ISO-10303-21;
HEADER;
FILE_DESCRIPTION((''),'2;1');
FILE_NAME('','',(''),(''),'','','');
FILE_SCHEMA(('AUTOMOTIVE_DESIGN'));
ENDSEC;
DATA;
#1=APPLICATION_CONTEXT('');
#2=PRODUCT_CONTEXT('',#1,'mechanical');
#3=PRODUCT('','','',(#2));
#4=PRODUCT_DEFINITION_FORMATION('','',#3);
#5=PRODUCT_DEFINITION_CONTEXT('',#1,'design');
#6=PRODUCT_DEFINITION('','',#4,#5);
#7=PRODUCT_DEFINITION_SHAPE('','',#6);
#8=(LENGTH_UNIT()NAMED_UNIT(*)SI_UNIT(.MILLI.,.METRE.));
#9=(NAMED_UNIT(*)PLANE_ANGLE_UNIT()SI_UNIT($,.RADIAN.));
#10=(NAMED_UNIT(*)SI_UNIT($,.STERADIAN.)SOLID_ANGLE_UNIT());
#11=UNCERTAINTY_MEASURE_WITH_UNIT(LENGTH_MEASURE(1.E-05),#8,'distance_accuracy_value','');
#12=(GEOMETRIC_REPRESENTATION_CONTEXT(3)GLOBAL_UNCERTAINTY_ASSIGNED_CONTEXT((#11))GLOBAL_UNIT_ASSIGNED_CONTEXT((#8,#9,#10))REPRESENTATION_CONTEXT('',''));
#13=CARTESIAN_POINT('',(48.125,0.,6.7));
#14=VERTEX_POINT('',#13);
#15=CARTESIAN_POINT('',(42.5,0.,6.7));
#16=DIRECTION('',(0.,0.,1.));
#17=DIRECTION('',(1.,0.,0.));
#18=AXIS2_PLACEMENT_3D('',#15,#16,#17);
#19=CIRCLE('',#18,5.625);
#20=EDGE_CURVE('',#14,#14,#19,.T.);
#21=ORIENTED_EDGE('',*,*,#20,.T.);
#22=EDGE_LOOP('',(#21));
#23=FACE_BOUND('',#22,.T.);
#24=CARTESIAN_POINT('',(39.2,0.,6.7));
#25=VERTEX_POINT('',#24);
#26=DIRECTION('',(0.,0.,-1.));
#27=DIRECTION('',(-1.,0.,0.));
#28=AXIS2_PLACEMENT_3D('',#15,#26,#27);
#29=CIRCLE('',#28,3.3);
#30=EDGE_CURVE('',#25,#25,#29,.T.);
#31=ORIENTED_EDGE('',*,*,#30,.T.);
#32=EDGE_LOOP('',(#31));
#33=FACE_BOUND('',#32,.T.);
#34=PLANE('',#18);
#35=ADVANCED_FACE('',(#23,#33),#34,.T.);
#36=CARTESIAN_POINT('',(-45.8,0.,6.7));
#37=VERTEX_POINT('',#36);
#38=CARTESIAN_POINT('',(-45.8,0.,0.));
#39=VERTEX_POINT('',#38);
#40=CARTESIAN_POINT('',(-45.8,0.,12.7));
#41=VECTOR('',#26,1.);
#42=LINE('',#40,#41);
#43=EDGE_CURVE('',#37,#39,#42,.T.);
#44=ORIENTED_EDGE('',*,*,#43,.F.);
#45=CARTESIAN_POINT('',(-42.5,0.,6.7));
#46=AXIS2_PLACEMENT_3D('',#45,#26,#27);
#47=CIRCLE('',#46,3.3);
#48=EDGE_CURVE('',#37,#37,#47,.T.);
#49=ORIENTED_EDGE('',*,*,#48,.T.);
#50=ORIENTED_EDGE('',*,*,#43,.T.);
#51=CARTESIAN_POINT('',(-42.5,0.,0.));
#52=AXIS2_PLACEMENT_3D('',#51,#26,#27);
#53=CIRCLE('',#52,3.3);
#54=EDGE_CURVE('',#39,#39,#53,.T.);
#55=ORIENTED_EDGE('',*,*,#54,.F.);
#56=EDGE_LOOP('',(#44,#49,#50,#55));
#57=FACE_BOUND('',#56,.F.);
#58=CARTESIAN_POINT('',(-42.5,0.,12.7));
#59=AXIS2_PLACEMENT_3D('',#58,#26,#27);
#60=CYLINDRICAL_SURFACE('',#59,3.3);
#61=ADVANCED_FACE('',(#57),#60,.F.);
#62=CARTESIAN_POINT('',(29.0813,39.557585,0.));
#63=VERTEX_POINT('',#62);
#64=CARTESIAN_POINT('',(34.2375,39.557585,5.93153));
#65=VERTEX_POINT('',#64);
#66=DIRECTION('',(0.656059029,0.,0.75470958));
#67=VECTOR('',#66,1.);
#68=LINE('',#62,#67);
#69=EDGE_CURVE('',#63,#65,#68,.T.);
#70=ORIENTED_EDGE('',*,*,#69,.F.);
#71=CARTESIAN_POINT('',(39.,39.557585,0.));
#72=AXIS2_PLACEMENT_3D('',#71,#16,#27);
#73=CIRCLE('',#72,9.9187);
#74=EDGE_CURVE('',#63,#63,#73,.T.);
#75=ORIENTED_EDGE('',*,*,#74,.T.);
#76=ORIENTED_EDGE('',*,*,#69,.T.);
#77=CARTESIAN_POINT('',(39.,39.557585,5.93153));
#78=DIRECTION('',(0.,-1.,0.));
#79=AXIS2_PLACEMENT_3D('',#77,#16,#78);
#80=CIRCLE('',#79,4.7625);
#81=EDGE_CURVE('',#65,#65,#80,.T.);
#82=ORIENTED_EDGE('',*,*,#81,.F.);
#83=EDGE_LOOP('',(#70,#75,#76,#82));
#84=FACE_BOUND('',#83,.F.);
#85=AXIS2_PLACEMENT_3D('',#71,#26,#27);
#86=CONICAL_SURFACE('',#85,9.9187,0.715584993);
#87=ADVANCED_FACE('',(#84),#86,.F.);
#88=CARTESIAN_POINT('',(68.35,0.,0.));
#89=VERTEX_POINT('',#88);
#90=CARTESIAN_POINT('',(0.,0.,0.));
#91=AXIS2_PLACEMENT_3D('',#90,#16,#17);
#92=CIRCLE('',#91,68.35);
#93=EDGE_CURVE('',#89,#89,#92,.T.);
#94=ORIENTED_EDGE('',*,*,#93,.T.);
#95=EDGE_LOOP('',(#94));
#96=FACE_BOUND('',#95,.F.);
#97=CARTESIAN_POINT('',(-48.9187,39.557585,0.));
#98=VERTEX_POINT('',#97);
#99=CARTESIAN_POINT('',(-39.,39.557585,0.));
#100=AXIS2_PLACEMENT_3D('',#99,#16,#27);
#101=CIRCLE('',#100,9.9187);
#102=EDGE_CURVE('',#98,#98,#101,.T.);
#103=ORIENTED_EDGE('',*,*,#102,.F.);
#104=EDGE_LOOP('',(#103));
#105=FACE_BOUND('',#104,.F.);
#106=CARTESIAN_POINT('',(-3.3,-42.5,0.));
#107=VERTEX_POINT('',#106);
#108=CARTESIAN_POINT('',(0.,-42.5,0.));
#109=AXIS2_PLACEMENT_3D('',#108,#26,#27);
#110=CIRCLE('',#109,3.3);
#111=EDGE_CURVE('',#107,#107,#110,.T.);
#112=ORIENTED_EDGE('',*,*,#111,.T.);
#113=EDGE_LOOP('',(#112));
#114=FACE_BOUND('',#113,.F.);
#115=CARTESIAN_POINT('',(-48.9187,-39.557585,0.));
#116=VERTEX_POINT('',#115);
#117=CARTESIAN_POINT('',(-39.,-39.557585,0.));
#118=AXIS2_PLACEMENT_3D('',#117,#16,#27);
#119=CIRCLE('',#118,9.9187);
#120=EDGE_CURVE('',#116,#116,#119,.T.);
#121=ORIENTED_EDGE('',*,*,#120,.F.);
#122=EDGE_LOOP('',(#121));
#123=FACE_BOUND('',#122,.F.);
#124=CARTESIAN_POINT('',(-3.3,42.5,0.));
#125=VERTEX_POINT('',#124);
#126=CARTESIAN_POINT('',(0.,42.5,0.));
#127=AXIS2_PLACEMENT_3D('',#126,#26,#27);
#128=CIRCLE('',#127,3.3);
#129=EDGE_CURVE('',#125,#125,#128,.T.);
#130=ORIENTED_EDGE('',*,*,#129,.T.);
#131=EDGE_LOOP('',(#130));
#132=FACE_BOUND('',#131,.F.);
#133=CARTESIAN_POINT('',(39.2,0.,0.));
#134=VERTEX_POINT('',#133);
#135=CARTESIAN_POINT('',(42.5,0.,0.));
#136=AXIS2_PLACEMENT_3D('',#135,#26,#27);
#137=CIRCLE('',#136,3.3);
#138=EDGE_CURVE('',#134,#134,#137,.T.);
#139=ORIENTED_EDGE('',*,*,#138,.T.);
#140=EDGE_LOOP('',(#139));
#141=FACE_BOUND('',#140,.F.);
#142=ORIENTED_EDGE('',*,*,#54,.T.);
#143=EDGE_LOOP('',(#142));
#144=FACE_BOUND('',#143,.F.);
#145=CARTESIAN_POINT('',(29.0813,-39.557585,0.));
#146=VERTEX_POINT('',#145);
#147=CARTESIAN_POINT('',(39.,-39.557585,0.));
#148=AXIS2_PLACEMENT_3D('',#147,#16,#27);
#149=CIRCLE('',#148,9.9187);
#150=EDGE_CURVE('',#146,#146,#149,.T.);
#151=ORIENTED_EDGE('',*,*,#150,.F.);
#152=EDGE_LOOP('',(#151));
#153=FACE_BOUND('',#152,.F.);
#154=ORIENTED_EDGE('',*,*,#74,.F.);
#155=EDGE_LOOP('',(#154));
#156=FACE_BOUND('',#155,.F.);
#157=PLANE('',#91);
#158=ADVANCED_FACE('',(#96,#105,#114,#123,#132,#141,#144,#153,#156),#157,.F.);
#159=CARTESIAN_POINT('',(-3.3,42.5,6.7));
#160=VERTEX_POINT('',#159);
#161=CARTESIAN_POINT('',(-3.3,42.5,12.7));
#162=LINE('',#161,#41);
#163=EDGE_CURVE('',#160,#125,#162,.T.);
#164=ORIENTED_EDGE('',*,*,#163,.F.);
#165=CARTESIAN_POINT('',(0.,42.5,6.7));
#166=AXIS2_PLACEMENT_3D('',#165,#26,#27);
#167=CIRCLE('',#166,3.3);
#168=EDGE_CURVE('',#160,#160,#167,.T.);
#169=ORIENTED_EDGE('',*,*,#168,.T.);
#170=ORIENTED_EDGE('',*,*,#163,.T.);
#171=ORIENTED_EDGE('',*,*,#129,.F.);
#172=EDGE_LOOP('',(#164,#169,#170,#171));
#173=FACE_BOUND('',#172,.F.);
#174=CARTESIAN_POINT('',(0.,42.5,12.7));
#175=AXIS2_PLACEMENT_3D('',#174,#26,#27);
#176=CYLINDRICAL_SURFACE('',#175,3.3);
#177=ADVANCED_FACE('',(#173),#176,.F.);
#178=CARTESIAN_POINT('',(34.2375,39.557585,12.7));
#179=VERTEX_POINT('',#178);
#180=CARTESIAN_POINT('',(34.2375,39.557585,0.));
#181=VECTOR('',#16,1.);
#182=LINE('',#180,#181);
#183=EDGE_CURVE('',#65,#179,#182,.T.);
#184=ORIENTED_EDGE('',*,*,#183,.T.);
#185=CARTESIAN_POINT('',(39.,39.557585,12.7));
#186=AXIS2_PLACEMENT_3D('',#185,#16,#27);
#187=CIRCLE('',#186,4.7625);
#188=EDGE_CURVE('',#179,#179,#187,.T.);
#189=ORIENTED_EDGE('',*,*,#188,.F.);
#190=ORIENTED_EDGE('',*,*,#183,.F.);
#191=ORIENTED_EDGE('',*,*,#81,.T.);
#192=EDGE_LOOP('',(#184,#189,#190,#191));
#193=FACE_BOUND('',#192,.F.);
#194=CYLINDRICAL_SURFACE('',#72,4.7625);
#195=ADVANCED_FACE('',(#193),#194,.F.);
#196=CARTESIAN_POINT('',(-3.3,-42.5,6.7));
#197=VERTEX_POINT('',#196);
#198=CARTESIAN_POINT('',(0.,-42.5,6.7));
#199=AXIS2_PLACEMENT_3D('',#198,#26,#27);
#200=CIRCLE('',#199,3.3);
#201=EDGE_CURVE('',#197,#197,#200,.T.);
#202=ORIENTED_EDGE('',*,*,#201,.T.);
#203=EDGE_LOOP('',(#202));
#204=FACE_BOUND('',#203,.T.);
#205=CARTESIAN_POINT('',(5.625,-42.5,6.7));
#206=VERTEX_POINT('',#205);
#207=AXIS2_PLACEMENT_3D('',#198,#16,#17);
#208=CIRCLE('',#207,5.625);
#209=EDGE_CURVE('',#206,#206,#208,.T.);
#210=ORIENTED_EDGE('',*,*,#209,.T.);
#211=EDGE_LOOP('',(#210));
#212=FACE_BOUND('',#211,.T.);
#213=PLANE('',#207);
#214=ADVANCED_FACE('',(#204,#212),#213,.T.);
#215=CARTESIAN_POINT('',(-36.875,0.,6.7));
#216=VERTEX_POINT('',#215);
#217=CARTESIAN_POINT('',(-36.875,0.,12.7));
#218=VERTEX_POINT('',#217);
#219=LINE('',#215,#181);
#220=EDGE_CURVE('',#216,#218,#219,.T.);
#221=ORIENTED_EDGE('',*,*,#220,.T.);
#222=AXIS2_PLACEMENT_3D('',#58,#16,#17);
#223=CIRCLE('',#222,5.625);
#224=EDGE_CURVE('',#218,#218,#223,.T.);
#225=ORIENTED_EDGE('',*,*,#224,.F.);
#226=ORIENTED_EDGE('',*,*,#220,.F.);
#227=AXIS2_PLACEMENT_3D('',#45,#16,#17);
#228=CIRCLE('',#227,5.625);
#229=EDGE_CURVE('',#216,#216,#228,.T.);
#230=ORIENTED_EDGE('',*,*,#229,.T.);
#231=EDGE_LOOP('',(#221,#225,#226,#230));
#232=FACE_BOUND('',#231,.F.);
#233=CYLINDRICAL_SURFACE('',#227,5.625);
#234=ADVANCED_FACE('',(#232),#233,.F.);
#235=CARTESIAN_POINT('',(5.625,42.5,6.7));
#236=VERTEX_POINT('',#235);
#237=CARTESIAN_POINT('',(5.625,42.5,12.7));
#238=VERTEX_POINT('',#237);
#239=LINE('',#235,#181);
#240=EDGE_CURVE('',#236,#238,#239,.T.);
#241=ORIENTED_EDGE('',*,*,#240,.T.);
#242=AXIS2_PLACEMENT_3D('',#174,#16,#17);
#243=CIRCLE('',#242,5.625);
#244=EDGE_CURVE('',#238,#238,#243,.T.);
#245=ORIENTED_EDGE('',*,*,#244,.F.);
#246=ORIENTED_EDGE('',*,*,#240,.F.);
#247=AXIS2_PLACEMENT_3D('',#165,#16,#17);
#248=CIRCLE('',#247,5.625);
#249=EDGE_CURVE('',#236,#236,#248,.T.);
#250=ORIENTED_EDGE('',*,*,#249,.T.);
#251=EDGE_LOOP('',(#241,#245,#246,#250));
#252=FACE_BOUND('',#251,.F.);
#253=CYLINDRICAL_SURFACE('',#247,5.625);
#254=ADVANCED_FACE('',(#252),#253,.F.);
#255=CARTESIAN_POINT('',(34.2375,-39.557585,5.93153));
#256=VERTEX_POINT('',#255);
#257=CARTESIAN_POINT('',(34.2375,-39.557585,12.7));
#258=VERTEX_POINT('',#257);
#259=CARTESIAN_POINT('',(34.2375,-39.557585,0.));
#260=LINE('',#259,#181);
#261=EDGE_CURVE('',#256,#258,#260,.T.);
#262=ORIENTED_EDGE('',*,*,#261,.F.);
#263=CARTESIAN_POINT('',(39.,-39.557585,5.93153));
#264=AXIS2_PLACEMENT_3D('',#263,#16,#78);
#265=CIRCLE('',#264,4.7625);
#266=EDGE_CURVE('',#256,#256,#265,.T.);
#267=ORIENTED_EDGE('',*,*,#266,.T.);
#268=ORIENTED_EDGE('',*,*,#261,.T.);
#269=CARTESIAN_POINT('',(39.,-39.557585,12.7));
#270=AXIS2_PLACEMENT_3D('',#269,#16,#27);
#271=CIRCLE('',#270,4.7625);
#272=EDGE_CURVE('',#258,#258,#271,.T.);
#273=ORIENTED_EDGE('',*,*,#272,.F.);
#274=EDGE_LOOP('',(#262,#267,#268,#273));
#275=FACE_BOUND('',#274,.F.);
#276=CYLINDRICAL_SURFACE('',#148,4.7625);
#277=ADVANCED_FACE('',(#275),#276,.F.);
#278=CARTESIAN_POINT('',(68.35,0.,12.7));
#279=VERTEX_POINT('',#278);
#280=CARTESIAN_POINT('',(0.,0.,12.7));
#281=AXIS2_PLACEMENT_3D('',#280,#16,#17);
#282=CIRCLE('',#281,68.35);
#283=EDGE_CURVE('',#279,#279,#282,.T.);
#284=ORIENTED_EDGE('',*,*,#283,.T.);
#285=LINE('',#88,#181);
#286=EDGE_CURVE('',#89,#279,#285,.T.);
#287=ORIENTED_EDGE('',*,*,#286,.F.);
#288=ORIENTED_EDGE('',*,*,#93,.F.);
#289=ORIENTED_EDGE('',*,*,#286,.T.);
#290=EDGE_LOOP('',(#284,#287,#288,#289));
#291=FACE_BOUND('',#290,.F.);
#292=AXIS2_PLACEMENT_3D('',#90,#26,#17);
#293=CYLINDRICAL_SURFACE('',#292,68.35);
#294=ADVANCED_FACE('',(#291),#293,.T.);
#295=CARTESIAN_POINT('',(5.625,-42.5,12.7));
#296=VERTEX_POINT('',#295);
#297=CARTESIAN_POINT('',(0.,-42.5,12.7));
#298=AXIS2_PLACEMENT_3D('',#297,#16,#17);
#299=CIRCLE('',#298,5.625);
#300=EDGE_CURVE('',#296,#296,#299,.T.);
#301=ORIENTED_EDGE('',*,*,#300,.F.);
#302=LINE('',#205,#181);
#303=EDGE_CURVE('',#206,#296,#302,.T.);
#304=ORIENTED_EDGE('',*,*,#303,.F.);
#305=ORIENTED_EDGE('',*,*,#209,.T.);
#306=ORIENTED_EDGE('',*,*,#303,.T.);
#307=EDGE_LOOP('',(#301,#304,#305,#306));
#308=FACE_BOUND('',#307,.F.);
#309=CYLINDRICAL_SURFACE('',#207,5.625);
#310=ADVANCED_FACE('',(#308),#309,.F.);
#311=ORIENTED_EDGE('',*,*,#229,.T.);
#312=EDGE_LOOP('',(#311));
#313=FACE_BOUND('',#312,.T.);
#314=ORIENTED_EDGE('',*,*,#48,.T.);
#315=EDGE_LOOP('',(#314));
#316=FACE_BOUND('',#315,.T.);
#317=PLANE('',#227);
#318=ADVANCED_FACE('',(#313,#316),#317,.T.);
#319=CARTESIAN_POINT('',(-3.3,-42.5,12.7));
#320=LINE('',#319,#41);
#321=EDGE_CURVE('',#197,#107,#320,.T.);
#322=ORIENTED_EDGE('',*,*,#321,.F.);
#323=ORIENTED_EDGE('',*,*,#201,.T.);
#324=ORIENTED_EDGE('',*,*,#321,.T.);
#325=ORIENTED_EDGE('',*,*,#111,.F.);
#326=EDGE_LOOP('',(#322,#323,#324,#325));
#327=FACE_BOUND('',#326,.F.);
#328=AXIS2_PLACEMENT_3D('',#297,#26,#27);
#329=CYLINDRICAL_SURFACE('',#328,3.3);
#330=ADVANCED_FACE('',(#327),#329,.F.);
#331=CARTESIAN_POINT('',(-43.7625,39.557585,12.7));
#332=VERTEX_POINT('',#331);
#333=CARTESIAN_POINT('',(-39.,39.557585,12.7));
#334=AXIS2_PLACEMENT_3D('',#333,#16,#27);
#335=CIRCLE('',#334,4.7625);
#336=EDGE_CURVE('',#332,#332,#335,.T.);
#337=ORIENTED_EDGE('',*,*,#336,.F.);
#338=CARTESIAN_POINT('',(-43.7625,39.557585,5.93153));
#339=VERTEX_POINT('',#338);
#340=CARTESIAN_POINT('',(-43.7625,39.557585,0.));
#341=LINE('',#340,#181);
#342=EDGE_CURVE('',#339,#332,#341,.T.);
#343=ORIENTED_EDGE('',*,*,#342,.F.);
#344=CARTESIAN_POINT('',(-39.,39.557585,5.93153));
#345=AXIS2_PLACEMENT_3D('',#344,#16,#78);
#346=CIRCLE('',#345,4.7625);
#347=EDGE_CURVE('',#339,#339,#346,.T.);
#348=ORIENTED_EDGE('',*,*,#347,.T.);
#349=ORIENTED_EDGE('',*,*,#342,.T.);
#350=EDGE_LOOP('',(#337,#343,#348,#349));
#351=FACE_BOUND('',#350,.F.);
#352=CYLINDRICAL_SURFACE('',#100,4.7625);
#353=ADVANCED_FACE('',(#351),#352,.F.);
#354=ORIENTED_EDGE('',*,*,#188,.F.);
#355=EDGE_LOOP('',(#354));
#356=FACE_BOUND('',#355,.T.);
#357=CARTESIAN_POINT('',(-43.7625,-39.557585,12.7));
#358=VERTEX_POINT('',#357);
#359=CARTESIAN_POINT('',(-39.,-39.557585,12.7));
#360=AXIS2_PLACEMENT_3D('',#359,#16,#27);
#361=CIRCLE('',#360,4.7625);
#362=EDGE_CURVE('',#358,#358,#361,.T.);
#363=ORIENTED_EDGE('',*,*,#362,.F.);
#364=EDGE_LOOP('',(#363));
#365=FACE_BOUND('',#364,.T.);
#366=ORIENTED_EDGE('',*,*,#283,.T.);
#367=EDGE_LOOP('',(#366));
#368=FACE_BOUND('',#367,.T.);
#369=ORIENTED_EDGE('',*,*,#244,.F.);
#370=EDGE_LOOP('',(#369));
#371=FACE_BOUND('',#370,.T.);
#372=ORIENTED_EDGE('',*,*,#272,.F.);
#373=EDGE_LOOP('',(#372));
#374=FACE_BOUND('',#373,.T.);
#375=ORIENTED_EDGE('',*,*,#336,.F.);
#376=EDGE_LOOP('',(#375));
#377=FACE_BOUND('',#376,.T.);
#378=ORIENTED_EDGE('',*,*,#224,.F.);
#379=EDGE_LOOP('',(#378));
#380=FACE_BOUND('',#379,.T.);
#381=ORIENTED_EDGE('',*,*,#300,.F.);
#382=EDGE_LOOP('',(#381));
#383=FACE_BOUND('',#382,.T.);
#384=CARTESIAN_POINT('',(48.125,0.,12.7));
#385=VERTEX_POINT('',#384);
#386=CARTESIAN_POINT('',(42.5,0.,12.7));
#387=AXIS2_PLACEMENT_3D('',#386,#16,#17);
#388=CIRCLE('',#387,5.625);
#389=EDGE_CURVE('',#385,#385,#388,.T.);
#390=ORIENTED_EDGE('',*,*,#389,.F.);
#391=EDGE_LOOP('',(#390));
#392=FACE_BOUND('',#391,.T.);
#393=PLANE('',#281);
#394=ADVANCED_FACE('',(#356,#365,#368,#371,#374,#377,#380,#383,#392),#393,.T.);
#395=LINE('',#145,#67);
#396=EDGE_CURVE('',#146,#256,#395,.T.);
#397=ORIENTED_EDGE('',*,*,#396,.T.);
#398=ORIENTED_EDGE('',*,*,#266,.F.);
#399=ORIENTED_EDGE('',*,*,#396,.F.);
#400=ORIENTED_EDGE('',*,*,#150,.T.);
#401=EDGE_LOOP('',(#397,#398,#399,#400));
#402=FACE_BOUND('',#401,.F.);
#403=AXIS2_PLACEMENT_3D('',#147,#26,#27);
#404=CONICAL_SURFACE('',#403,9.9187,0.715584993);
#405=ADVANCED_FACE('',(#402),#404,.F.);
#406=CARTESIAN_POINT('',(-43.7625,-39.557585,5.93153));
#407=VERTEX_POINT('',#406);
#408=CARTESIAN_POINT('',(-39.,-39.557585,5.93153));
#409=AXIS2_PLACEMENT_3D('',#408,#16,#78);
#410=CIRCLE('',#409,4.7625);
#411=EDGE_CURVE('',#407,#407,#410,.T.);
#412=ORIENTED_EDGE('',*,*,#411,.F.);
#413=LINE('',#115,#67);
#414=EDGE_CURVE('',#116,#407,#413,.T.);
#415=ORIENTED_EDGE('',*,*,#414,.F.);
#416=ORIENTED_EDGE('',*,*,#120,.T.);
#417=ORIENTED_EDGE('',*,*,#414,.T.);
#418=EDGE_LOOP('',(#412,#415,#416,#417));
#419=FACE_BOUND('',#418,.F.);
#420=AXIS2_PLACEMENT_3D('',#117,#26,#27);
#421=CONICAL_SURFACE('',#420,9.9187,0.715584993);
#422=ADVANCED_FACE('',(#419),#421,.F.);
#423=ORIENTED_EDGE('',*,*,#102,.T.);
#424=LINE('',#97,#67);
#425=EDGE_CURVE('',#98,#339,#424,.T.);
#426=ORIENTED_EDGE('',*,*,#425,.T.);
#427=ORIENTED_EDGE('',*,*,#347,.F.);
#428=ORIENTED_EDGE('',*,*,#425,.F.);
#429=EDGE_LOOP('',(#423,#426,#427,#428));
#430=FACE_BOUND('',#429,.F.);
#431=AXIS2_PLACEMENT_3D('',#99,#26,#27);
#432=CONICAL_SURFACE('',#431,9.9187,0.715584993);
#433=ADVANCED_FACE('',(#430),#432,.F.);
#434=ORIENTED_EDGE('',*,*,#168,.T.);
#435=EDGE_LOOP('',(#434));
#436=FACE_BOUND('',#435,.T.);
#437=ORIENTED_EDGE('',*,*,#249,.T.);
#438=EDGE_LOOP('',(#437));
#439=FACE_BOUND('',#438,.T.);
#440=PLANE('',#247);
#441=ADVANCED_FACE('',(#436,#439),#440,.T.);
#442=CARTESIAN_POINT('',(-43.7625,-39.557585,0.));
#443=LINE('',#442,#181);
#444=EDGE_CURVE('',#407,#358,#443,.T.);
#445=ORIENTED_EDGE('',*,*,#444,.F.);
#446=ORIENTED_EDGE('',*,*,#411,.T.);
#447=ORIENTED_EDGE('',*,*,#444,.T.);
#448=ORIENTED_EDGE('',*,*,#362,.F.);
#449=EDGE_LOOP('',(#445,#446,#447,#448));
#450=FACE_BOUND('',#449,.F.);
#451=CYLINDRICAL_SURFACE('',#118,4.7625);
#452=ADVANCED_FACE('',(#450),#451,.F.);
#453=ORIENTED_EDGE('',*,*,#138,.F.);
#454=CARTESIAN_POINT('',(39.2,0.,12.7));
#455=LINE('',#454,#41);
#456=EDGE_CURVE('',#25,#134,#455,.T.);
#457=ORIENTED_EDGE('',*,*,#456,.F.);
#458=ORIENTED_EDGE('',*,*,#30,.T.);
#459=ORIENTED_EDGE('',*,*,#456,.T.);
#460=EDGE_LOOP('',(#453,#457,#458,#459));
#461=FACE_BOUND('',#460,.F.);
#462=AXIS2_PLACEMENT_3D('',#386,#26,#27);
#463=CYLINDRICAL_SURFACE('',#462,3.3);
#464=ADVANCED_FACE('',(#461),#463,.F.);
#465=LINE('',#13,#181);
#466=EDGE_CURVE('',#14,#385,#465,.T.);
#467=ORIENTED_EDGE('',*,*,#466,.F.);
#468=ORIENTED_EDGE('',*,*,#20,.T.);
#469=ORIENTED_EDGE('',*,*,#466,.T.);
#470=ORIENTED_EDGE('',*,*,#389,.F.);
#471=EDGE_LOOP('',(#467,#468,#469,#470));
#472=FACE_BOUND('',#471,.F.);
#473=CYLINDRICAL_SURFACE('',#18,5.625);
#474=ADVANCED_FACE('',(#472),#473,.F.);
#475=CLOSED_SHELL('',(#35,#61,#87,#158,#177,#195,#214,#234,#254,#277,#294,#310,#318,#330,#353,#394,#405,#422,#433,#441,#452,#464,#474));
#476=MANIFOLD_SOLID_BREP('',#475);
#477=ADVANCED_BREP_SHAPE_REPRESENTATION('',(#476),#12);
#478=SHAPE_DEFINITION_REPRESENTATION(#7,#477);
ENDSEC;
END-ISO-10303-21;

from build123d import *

# Parameters (mm, degrees)
F1_R           = 68.35
F2_DEPTH       = 12.7
F4_D           = 9.525
F4_CSINK_D     = 19.8374
F4_CSINK_ANGLE = 82
F6_D           = 6.6
F6_CBORE_D     = 11.25
F6_CBORE_DEPTH = 6


# Not quite as in the source:
# - a length typed as a fraction of an inch, garbled in the dataset ("3 / 203.2 mm" for 3/8 in), is restored
# - a feature names something its author has since deleted; it is built from what else it names


with BuildPart() as f2:
    # F1 (on Top) → F2 (new body)
    with BuildSketch(Plane.XY):
        Circle(F1_R)
    extrude(amount=F2_DEPTH)

    # F4 (through all)
    with Locations(Plane(origin=(0, 0, 0), x_dir=(1, 0, 0), z_dir=(0, 0, -1))):
        with Locations((-39, -39.5575846078), (39, -39.5575846078), (-39, 39.5575846078), (39, 39.5575846078)):
            CounterSinkHole(F4_D / 2, F4_CSINK_D / 2, counter_sink_angle=F4_CSINK_ANGLE)

    # F6 (through all)
    with Locations(Plane.XY.offset(12.7)):
        with Locations((0, 42.5), (42.5, 0), (0, -42.5), (-42.5, 0)):
            CounterBoreHole(F6_D / 2, F6_CBORE_D / 2, F6_CBORE_DEPTH)


solid = f2.part
